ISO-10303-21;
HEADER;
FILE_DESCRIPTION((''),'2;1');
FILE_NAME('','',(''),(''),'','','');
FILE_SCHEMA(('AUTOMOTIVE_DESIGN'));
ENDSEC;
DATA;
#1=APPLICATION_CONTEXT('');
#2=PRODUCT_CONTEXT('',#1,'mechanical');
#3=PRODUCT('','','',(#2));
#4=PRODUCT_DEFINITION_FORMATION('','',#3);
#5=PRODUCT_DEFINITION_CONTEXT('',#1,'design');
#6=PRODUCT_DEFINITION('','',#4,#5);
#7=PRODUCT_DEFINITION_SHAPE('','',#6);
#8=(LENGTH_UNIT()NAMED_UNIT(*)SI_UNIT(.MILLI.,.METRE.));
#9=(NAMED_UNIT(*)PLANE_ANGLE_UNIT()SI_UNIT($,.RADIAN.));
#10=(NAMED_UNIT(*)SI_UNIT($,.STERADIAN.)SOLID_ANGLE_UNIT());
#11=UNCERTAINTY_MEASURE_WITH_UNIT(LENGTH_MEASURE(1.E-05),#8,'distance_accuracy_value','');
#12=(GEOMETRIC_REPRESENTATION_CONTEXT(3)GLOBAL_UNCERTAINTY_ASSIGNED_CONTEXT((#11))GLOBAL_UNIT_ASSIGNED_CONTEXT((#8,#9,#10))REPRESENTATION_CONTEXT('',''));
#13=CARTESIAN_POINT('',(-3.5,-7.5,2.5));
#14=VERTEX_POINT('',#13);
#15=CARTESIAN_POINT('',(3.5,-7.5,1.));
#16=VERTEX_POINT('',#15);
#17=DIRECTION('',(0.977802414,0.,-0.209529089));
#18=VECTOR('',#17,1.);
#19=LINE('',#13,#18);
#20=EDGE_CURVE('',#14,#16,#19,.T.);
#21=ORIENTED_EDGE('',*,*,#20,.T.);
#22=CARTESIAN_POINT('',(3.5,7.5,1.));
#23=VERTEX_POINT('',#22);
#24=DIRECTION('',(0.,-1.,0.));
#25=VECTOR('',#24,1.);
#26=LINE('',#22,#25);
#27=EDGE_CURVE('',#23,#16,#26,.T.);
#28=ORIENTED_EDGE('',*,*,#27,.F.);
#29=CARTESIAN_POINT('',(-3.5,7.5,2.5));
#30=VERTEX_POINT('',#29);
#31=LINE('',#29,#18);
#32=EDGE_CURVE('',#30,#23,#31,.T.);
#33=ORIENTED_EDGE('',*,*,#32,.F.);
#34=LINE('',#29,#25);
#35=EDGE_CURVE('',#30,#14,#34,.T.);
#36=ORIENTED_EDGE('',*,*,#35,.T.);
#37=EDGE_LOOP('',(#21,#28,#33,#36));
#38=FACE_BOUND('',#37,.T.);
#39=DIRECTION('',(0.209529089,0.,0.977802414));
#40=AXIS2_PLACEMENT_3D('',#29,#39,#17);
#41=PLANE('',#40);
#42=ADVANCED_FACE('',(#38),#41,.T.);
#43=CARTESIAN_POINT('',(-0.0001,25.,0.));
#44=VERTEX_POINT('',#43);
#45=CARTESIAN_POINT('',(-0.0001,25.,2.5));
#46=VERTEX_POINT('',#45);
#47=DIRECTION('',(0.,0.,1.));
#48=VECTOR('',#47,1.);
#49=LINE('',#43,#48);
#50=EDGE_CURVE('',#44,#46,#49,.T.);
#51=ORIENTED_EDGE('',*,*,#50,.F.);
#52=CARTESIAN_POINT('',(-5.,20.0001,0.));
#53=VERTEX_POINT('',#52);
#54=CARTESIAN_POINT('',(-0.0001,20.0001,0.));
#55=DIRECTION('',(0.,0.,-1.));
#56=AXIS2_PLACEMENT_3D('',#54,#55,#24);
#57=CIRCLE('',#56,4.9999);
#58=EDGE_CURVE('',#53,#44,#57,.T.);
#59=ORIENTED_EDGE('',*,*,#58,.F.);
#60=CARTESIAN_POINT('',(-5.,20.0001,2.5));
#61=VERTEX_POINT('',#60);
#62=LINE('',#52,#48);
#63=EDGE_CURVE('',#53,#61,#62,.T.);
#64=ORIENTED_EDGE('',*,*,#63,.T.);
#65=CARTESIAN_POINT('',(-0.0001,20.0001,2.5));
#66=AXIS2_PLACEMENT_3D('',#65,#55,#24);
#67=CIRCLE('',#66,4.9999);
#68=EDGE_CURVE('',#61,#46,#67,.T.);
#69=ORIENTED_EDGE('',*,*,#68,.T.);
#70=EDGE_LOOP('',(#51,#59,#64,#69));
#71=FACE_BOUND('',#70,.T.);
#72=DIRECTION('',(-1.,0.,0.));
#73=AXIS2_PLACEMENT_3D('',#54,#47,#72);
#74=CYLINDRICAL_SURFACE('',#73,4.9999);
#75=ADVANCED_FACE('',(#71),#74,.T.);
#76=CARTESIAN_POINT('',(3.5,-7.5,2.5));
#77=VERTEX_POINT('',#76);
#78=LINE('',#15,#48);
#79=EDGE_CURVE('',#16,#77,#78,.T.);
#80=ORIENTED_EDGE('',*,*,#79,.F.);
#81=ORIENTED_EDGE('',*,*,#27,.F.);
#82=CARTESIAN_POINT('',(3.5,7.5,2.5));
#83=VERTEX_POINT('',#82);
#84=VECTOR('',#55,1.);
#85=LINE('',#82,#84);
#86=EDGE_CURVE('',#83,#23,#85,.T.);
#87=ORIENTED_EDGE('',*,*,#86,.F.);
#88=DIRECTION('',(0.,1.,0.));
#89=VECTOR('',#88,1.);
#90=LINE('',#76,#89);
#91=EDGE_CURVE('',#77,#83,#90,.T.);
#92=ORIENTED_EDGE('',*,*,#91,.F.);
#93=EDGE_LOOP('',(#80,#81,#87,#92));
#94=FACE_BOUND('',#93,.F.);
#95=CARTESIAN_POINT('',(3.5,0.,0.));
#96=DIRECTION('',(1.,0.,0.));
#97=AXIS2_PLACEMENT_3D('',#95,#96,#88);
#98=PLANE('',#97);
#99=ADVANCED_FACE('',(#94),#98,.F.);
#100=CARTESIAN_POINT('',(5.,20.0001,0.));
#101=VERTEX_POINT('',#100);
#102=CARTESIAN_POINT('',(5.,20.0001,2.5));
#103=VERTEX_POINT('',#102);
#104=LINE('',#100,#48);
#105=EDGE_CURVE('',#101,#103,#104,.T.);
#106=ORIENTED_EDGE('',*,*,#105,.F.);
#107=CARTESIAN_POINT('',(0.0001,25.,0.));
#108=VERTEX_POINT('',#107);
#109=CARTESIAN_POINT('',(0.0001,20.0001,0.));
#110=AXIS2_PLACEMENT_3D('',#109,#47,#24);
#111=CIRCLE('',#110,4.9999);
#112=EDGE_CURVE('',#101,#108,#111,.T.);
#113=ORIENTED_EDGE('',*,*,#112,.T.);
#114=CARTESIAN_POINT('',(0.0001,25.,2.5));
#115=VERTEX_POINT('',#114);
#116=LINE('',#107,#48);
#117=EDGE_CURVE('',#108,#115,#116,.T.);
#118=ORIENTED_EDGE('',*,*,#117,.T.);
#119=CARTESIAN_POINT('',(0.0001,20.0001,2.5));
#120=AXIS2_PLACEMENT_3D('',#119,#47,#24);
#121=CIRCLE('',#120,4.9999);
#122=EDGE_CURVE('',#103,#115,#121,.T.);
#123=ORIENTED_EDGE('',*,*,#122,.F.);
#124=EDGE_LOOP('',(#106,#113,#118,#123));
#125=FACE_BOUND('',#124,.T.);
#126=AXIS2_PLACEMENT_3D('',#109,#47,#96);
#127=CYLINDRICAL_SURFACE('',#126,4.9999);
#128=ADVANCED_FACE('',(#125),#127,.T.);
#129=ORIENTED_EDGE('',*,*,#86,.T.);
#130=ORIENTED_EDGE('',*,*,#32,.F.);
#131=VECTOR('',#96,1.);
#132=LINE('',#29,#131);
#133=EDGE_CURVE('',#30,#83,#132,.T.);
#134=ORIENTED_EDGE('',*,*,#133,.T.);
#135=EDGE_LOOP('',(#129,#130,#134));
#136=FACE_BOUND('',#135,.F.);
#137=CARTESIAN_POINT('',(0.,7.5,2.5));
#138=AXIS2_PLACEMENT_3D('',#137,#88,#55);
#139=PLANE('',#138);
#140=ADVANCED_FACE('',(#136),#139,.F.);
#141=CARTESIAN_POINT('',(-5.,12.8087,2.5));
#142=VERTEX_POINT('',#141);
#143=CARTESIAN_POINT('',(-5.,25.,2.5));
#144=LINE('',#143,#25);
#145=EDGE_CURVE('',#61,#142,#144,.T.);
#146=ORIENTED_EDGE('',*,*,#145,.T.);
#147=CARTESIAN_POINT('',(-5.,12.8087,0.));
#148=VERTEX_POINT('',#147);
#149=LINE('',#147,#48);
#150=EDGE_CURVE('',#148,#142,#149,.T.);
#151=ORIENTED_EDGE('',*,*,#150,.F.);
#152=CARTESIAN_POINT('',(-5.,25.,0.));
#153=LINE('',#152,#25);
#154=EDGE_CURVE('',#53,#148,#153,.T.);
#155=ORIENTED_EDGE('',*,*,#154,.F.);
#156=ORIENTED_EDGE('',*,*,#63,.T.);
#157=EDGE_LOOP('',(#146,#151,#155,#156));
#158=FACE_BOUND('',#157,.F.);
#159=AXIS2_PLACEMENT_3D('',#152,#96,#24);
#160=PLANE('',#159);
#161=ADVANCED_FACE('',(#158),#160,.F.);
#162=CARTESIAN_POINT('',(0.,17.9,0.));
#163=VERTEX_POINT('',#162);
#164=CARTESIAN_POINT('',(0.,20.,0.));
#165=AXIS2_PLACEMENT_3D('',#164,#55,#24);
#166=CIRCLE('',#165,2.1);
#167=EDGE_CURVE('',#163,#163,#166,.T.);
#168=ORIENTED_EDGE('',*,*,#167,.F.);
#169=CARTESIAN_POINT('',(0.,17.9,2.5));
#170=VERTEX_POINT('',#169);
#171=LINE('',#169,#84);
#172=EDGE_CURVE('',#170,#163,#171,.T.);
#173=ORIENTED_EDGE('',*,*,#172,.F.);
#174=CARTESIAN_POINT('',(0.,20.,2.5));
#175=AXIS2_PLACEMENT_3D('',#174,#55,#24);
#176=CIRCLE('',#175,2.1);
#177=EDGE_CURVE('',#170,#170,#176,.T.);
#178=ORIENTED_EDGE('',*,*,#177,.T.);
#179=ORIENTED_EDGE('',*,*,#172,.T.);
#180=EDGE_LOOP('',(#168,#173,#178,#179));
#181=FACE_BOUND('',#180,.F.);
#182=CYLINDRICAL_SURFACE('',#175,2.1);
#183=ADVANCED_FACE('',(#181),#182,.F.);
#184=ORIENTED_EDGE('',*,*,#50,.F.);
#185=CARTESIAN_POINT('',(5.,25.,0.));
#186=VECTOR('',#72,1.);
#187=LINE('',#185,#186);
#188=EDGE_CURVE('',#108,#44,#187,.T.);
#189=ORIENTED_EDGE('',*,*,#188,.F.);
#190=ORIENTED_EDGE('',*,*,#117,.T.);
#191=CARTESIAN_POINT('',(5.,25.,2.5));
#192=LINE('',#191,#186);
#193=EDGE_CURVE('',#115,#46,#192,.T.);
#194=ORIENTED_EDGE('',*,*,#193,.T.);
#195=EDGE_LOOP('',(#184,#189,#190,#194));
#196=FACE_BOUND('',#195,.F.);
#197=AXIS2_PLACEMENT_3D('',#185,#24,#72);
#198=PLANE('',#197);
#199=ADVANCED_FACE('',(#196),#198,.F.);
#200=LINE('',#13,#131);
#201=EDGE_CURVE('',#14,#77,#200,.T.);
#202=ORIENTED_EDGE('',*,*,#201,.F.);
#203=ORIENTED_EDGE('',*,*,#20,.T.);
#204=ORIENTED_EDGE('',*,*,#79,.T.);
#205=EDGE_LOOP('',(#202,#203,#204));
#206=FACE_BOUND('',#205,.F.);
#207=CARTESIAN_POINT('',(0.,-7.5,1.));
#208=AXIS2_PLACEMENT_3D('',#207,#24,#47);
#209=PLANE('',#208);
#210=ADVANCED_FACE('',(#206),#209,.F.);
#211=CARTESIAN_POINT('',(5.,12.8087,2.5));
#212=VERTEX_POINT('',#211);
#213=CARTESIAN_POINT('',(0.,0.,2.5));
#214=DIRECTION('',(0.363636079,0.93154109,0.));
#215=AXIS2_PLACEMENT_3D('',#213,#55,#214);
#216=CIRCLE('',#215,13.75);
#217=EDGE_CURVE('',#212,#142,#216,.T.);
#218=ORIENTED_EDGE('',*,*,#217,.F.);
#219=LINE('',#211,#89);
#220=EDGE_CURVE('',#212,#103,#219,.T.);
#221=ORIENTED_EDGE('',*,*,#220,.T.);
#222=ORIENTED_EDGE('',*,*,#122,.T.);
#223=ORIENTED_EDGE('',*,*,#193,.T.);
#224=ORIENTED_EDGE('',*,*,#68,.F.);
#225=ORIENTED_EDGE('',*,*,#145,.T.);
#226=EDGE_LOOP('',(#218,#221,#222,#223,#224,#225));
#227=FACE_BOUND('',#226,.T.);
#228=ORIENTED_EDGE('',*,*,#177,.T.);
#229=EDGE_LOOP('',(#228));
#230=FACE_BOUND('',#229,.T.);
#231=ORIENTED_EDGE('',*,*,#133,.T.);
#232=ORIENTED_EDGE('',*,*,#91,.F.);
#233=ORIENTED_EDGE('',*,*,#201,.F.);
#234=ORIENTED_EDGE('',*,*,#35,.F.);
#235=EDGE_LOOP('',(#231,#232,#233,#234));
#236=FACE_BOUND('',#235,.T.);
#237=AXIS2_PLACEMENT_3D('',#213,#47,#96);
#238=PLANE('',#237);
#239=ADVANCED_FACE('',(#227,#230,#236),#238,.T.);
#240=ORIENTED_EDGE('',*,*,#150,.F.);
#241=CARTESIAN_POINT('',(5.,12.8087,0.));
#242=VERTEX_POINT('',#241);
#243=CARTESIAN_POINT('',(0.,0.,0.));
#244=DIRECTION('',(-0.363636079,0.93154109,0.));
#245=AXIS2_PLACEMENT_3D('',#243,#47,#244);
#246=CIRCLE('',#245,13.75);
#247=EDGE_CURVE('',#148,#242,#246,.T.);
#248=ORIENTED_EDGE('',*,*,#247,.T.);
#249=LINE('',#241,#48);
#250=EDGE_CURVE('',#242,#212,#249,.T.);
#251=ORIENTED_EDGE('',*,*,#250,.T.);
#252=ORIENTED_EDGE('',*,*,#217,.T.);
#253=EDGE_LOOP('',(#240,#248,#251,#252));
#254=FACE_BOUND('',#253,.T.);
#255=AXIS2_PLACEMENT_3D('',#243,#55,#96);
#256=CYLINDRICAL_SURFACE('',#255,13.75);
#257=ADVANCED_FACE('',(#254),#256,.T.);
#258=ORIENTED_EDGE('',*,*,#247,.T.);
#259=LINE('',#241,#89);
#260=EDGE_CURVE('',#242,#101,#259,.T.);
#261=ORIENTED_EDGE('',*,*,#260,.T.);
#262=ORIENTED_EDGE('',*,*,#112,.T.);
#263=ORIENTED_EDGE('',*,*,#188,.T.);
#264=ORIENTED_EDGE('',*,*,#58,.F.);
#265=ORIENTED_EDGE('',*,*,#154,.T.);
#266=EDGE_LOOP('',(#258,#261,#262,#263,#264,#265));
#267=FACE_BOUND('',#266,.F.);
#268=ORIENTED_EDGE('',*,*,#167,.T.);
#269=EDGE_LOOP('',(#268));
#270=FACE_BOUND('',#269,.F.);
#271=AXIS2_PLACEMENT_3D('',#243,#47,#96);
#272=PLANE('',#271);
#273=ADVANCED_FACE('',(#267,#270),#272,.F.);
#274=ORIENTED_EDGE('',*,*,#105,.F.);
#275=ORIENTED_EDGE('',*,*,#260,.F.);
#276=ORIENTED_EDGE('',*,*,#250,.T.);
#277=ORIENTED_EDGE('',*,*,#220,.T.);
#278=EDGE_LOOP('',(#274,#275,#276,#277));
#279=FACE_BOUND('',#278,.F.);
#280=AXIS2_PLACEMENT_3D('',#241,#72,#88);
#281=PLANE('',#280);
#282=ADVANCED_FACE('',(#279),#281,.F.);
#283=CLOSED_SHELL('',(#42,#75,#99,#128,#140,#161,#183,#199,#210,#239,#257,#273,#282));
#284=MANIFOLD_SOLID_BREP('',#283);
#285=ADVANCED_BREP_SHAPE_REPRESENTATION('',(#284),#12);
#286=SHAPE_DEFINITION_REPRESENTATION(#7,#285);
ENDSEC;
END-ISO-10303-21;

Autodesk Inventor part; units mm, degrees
sketch "Sketch1" plane through (0, 0, 0) normal (0, 0, 1) x (1, 0, 0)
  line L0 (0, 2.8582) -> (0, -2.8582) construction
  line L1 (-5.7775, 0) -> (5.7775, 0) construction
  circle A0 centre (0, 0) radius 13.75
  line L2 (5, 12.8087) -> (5, 25)
  line L3 (5, 25) -> (-5, 25)
  line L4 (-5, 25) -> (-5, 12.8087)
  line L5 (0, 32.75) -> (0, -21.5) construction
  point P0 (0, 20)
  dimension "d0" = 27.5
  dimension "d1" = 20
  dimension "d2" = 5
  dimension "d3" = 5
  dimension "d4" = 5
extrude "Extrusion1" add sketch "Sketch1" along normal blind 2.5
sketch "Sketch2" plane through (0, 0, 2.5) normal (0, 0, 1) x (1, 0, 0)
  line L0 (-5, 25) -> (-5, 12.8087) projected
  arc A0 (-5, 12.8087) -> (5, 12.8087) centre (0, 0) ccw projected
  line L1 (-5, 12.8087) -> (-5, 25) projected
  line L2 (-5, 25) -> (5, 25) projected
  line L3 (5, 25) -> (5, 12.8087) projected
  point P0 (0, 20)
  dimension "d7" = 5
  dimension "d8" = 5
hole "Hole1" at (0, 20, 2.5) direction (0, 0, -1) diameter 4.2 end through all
fillet "Fillet1" radius 5 2 edges at (-5, 25, 1.25) (5, 25, 1.25)
sketch "Sketch3" plane through (0, 0, 0) normal (1, 0, 0) x (0, 1, 0)
  line L0 (12.8087, 2.5) -> (-13.75, 2.5) projected
  line L1 (-7.5, 2.5) -> (7.5, 2.5)
  line L2 (7.5, 2.5) -> (7.5, 1)
  line L3 (7.5, 1) -> (-7.5, 1)
  line L4 (-7.5, 1) -> (-7.5, 2.5)
  line L5 (0, 3) -> (0, -0.5) projected
  line L6 (22.1, 2.5) -> (25, 2.5) projected
  line L7 (25, 2.5) -> (25, 0) projected
  line L8 (25, 0) -> (22.1, 0) projected
  line L9 (22.1, 0) -> (22.1, 2.5) projected
  line L10 (17.9, 0) -> (-13.75, 0) projected
  line L11 (-13.75, 0) -> (-13.75, 2.5) projected
  line L12 (-13.75, 2.5) -> (17.9, 2.5) projected
  line L13 (17.9, 2.5) -> (17.9, 0) projected
  point P0 (0, 0)
  point P1 (7.5, 2.5)
  dimension "d17" = 15
  dimension "d18" = 7.5
  dimension "d19" = 1.5
extrude "Extrusion2" cut sketch "Sketch3" along normal mid plane 7 contours L2 L3 L5 L0 | L5 L3 L4 L0
sketch "Sketch4" plane through (-3.5, 7.5, 2.5) normal (0, -1, 0) x (1, 0, 0)
  line L0 (15.0244, -2.5) -> (-8.0244, -2.5) projected
  line L1 (-8.0244, -2.5) -> (-8.0244, 0) projected
  line L2 (-8.0244, 0) -> (0, 0) projected
  line L3 (0, 0) -> (7, 0) projected
  line L4 (7, 0) -> (7, -1.5) projected
  line L5 (7, -1.5) -> (0, -1.5) projected
  line L6 (0, 0) -> (0, -1.5) projected
  line L7 (15.0244, 0) -> (15.0244, -2.5) projected
  line L8 (7, 0) -> (15.0244, 0) projected
  line L9 (0, 0) -> (7, -1.5)
  point P0 (3.5, -2.5)
extrude "Extrusion3" add sketch "Sketch4" along normal up to surface (15 mm away) contours L9 L5 L6
equation "\"d18\" = 0.5 * d17"
properties part number "Filler Cap" material "S235"
